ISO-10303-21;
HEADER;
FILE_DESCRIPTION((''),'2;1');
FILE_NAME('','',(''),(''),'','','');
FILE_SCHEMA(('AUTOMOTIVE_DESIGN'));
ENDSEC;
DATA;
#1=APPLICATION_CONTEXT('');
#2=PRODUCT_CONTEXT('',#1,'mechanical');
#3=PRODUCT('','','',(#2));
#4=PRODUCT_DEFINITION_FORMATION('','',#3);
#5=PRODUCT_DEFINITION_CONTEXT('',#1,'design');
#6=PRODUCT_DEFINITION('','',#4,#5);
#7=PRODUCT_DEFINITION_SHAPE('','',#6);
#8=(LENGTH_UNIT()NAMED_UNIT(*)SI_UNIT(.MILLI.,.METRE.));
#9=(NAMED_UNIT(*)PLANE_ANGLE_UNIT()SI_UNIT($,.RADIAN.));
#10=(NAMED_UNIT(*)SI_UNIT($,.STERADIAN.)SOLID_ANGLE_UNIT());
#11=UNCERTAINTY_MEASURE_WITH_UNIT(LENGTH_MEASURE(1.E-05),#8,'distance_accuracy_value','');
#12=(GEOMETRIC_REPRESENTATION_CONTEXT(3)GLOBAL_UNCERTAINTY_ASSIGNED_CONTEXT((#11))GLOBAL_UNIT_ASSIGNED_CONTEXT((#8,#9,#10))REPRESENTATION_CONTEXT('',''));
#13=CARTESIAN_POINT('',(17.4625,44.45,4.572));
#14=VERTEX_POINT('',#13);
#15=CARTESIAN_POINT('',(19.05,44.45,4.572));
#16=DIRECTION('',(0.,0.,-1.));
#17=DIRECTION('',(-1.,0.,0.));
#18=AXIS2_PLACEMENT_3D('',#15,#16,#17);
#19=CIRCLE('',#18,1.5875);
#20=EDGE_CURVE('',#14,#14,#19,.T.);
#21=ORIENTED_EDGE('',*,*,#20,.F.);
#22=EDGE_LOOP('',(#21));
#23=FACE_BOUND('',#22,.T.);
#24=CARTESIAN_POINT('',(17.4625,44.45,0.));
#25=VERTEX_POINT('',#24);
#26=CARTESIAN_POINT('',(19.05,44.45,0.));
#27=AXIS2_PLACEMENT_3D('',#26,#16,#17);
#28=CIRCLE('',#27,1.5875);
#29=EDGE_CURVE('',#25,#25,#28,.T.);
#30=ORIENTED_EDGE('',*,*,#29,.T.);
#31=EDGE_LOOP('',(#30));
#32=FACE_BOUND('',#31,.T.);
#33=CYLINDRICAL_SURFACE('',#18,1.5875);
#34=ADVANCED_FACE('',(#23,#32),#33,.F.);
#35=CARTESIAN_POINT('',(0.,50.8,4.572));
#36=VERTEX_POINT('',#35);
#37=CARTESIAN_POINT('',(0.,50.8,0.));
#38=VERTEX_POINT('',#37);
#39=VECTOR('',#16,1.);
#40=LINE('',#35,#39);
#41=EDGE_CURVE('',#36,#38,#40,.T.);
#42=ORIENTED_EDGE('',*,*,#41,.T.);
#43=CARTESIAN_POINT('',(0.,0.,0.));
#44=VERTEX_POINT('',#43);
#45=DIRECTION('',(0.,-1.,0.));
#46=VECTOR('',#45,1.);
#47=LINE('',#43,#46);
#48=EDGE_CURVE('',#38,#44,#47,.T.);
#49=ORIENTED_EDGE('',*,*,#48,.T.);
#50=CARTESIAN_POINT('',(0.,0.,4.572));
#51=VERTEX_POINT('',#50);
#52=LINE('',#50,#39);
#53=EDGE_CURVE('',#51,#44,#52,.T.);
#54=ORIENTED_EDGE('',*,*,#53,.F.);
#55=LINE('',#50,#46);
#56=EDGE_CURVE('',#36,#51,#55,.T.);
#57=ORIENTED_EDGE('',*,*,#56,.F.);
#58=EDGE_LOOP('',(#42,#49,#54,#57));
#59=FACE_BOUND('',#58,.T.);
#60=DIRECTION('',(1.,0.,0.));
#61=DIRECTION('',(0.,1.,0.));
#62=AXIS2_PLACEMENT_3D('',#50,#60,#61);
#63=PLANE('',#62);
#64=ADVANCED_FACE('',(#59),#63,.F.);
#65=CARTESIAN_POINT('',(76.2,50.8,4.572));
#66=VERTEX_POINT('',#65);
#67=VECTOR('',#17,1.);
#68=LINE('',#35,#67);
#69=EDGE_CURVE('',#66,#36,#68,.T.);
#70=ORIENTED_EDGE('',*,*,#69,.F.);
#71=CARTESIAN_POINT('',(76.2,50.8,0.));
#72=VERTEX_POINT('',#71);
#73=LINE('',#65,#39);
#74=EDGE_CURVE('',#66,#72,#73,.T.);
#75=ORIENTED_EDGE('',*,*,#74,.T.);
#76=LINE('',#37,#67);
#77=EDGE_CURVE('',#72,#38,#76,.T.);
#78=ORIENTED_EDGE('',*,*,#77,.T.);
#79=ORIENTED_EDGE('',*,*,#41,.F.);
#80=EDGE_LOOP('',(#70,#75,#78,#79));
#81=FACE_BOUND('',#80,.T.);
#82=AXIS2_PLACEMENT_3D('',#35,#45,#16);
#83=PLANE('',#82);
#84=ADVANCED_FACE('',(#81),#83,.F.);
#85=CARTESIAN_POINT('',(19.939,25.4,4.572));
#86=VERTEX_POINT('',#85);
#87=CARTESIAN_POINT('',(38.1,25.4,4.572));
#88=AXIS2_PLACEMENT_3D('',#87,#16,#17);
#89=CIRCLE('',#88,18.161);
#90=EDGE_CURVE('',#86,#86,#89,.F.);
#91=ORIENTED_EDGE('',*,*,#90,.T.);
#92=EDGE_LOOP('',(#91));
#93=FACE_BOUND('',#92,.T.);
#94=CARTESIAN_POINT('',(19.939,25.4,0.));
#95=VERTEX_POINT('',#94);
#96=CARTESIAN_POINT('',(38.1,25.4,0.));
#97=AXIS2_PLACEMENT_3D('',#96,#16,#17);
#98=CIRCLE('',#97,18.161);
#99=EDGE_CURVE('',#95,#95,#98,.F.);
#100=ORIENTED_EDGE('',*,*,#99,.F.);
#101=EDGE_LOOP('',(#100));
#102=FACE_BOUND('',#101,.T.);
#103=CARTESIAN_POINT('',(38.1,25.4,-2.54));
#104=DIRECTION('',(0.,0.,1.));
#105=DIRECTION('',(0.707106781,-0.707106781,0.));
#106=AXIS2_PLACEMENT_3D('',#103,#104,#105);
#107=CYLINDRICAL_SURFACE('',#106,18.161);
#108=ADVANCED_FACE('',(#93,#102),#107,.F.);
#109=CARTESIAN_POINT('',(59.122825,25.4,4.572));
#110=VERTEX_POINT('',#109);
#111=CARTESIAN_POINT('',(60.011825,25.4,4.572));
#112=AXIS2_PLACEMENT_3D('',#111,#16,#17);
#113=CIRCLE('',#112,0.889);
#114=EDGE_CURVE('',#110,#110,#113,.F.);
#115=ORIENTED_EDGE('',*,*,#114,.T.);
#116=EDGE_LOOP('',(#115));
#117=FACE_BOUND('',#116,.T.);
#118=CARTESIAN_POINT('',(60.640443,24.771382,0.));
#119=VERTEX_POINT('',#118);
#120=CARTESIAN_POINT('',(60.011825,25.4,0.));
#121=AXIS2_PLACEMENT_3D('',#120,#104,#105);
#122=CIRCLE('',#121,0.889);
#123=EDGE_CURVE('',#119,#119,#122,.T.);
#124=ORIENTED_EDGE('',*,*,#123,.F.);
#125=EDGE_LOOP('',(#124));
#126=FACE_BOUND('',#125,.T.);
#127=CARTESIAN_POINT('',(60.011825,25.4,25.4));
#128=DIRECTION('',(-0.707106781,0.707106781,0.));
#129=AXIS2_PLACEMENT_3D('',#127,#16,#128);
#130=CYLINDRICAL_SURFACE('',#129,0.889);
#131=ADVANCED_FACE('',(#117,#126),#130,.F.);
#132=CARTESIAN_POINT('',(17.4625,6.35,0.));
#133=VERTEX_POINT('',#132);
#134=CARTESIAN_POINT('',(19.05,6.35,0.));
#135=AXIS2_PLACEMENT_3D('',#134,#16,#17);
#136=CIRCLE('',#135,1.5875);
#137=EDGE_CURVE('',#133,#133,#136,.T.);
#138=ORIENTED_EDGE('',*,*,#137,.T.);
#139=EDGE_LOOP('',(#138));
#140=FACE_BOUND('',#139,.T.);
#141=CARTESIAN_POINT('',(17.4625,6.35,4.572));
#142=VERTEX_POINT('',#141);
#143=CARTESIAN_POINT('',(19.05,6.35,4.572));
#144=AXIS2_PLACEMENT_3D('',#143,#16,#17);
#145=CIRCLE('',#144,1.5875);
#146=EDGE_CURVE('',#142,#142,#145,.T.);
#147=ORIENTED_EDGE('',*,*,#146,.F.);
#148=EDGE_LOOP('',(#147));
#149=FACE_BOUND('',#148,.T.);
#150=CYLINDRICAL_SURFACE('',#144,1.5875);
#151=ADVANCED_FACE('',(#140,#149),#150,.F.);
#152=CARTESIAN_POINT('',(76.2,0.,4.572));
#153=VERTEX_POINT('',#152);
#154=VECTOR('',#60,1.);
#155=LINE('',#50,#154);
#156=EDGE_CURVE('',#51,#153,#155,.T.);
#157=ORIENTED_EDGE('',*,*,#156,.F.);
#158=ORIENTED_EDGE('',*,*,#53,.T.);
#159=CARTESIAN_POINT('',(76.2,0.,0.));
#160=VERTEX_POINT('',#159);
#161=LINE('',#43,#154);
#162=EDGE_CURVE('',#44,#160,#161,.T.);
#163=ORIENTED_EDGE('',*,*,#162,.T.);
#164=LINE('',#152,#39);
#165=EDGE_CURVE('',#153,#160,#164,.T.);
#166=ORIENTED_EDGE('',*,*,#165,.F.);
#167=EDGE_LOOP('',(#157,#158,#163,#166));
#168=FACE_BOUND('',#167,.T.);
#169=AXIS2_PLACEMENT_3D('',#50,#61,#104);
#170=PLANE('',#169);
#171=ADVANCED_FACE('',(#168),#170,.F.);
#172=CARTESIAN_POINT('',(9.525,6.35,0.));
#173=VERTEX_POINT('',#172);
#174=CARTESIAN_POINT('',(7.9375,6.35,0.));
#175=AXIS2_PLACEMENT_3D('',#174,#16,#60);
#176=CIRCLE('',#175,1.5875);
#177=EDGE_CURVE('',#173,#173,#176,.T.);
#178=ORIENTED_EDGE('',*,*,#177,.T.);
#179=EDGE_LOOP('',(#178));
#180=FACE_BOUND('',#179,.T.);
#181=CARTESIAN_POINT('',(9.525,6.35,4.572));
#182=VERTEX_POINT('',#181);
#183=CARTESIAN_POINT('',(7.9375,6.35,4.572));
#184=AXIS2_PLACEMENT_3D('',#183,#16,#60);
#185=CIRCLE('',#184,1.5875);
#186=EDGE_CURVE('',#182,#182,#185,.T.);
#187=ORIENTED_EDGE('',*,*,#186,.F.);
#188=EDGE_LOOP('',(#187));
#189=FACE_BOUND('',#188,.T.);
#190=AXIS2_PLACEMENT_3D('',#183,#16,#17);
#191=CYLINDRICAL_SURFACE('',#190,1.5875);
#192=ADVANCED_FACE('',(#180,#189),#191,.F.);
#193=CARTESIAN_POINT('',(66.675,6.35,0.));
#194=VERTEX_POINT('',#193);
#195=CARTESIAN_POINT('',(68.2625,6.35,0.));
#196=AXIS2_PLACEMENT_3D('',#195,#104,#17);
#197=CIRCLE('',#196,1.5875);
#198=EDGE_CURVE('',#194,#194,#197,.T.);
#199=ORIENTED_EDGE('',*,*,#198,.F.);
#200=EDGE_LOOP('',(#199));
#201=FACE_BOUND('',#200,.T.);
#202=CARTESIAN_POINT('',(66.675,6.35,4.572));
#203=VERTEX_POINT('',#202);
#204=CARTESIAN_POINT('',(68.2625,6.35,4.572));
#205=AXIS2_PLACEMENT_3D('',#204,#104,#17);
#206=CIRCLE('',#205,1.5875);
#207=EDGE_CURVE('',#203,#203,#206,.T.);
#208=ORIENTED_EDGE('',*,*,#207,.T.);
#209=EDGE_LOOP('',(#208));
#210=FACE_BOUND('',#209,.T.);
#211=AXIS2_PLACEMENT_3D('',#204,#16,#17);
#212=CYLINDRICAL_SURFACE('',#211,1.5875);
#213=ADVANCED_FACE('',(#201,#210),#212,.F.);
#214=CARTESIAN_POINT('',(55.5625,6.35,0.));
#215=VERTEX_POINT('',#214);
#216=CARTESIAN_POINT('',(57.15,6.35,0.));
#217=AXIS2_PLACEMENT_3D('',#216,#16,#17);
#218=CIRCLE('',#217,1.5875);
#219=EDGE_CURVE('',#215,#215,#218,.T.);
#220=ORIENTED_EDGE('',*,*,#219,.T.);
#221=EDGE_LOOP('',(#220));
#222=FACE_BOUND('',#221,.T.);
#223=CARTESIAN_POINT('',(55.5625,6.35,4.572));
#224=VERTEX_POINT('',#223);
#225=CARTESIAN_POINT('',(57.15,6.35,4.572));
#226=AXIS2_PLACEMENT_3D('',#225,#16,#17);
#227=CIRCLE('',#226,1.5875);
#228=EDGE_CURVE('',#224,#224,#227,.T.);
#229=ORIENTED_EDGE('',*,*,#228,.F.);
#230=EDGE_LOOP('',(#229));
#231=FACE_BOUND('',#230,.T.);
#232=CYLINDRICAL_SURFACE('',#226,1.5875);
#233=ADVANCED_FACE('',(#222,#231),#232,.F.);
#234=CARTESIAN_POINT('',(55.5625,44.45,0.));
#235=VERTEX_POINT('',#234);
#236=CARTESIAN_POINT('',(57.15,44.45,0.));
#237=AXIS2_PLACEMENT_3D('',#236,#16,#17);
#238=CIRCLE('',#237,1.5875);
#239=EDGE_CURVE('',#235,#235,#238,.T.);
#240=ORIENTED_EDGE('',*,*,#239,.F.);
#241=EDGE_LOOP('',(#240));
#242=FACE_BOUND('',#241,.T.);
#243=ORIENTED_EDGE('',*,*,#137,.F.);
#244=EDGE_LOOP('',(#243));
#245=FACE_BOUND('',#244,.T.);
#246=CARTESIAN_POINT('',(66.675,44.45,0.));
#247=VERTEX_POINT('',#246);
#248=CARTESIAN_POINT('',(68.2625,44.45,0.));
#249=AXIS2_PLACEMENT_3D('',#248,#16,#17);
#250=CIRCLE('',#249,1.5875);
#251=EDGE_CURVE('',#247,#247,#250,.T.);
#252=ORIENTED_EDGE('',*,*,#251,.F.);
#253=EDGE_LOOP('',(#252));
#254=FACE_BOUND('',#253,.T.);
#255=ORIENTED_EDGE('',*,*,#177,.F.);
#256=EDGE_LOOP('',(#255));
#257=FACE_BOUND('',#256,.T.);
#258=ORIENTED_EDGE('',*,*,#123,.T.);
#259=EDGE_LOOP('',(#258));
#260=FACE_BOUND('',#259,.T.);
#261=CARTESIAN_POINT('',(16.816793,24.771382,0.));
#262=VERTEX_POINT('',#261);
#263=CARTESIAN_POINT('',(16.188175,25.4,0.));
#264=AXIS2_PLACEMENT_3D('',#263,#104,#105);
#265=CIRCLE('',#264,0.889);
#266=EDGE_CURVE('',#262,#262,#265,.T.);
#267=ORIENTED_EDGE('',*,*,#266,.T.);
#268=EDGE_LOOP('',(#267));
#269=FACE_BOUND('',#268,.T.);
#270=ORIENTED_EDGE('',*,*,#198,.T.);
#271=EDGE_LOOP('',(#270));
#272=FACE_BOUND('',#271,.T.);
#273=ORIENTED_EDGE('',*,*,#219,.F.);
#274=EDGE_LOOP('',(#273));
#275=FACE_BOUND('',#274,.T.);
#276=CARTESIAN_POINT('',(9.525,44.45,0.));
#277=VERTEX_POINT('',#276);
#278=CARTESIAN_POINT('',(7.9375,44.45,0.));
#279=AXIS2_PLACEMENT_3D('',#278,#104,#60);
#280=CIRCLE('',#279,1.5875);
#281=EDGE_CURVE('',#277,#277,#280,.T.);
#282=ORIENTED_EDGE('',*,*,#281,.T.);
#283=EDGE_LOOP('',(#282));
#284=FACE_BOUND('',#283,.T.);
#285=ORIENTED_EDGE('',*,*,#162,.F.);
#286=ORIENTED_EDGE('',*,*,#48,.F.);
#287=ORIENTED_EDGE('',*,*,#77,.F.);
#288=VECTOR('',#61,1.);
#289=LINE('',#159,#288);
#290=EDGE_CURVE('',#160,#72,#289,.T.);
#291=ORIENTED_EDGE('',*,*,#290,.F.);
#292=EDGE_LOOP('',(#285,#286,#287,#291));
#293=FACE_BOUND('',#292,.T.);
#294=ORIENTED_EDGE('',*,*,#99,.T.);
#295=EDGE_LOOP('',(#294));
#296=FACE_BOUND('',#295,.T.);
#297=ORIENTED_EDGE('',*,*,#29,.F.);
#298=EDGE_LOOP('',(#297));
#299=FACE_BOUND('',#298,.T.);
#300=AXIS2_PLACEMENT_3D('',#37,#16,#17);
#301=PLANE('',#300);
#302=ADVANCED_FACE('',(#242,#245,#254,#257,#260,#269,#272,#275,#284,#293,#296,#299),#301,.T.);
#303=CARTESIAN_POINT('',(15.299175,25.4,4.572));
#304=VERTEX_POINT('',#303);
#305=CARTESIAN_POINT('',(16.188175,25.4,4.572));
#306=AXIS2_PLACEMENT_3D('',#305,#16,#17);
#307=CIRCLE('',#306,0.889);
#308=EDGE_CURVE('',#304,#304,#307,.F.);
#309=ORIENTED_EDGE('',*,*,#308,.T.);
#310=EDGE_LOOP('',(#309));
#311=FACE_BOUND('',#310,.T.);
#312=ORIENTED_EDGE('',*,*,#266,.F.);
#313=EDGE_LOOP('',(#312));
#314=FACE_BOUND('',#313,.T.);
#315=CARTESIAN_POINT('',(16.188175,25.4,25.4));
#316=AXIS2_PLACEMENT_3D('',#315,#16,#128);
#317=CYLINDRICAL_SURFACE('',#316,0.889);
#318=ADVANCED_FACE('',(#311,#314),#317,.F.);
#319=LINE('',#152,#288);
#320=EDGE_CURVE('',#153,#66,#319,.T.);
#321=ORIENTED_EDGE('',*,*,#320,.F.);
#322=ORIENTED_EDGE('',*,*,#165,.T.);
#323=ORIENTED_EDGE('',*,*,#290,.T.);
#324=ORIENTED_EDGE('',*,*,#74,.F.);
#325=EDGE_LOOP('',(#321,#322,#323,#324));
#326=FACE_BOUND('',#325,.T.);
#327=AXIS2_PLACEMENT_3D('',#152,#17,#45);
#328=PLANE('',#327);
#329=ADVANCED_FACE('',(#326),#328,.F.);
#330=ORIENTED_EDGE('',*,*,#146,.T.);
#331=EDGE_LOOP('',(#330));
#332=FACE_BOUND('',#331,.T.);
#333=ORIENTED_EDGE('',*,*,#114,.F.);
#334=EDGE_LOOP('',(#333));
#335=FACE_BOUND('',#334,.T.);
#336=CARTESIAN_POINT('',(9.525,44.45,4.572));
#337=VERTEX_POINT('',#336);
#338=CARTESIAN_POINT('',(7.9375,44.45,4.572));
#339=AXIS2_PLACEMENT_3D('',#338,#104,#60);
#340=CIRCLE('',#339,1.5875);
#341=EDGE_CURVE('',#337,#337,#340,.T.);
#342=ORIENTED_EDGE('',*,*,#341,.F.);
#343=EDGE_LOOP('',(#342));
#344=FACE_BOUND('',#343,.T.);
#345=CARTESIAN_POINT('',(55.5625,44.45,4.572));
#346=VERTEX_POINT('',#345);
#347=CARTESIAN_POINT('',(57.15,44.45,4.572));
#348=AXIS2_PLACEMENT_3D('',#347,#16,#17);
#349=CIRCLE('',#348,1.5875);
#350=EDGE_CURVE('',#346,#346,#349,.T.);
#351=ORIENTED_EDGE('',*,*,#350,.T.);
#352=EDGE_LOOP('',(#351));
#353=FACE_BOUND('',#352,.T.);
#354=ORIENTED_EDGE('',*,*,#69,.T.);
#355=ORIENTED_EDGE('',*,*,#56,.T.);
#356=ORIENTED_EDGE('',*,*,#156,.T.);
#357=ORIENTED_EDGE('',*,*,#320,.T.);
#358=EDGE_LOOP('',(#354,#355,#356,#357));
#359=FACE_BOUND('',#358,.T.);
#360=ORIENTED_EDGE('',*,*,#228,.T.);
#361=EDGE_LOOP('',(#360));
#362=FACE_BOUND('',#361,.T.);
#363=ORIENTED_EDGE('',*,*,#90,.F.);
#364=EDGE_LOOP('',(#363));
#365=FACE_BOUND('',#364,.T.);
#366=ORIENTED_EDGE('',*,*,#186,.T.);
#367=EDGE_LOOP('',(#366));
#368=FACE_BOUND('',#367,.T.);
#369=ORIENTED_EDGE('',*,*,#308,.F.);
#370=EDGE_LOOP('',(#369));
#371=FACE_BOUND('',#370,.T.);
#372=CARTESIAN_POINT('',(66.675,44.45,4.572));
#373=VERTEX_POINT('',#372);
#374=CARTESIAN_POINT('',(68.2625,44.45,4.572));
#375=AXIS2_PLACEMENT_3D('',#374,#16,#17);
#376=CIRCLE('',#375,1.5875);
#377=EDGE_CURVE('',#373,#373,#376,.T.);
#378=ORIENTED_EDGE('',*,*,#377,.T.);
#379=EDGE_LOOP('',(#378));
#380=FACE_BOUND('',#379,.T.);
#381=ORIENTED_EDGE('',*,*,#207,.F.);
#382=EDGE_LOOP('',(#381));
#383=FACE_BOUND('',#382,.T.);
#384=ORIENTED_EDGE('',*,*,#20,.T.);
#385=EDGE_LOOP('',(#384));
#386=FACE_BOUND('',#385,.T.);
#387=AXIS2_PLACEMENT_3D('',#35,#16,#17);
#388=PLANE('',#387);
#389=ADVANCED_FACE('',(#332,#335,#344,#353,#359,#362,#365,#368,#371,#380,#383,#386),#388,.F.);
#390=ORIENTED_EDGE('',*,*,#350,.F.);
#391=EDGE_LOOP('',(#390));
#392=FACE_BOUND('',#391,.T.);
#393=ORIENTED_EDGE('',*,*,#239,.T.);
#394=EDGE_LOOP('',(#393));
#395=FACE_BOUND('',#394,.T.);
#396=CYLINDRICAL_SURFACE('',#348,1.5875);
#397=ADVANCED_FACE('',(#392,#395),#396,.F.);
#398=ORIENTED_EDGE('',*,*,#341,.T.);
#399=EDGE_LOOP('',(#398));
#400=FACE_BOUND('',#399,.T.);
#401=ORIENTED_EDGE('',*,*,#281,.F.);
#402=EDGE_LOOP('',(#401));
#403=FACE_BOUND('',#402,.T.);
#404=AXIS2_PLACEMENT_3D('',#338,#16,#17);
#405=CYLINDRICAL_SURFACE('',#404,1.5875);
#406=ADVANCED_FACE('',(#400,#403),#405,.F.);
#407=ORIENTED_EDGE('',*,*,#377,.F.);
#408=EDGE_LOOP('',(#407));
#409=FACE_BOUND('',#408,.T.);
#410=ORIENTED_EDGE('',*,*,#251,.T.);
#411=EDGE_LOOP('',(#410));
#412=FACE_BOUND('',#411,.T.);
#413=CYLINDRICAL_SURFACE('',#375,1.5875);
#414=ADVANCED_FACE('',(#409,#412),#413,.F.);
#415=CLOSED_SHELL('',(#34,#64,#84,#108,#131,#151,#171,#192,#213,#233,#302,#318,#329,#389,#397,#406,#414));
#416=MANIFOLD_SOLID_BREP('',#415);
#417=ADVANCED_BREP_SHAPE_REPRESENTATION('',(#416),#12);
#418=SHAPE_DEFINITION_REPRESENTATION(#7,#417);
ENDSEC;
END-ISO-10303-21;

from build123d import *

# Parameters (mm, degrees)
SKETCH1_W               = 76.2
SKETCH1_H               = 50.8
BOSS_EXTRUDE1_DEPTH     = 4.572
CAVITY5_OUTLINE_R       = 18.161
CAVITY5_OUTLINE_R_2     = 0.889
CAVITY5_DEPTH           = 4.572
SKETCH3_R               = 1.5875
CUT_EXTRUDE1_DEPTH      = 92.695055396
MIRROR2_COPY_1_SKETCH_R = 1.5875
MIRROR2_COPY_1_DEPTH    = 92.695055396
SKETCH4_R               = 1.5875
CUT_EXTRUDE2_DEPTH      = 92.695055396


# Read off the part's stored shape, not the designer's step: Cavity5
with BuildPart() as part:
    # Sketch1 → Boss-Extrude1 (new body)
    with BuildSketch(Plane.XY):
        with Locations((38.1, 25.4)):
            Rectangle(SKETCH1_W, SKETCH1_H)
    extrude(amount=BOSS_EXTRUDE1_DEPTH)

    # Cavity5 outline → Cavity5 (cut)
    with BuildSketch(Plane.XY):
        with Locations((38.1, 25.4)):
            Circle(CAVITY5_OUTLINE_R)
        with Locations((16.188175065, 25.4)):
            Circle(CAVITY5_OUTLINE_R_2)
        with Locations((60.011824935, 25.4)):
            Circle(CAVITY5_OUTLINE_R_2)
    extrude(amount=CAVITY5_DEPTH, mode=Mode.SUBTRACT)

    # Sketch3 → Cut-Extrude1 (cut, through all)
    with BuildSketch(Plane(origin=(0, 0, 0), x_dir=(-1, 0, 0), z_dir=(0, 0, -1))):
        with Locations((-68.2625, 44.45)):
            Circle(SKETCH3_R)
    cut_extrude1 = extrude(amount=-CUT_EXTRUDE1_DEPTH, mode=Mode.SUBTRACT)

    # Mirror1: Cut-Extrude1 across plane
    add(cut_extrude1.mirror(Plane(origin=(38.1, 0, 0), x_dir=(0, 0, 1), z_dir=(1, 0, 0))), mode=Mode.SUBTRACT)

    # Mirror2: Cut-Extrude1 across plane
    add(cut_extrude1.mirror(Plane.ZX.offset(25.4)), mode=Mode.SUBTRACT)

    # Mirror2 copy 1 sketch → Mirror2 copy 1 (cut, through all)
    with BuildSketch(Plane(origin=(76.2, 50.8, 0), x_dir=(1, 0, 0), z_dir=(0, 0, -1))):
        with Locations((-68.2625, 44.45)):
            Circle(MIRROR2_COPY_1_SKETCH_R)
    extrude(amount=-MIRROR2_COPY_1_DEPTH, mode=Mode.SUBTRACT)

    # Sketch4 → Cut-Extrude2 (cut, through all)
    with BuildSketch(Plane(origin=(0, 0, 0), x_dir=(-1, 0, 0), z_dir=(0, 0, -1))):
        with Locations((-19.05, 44.45)):
            Circle(SKETCH4_R)
        with Locations((-57.15, 44.45)):
            Circle(SKETCH4_R)
        with Locations((-57.15, 6.35)):
            Circle(SKETCH4_R)
        with Locations((-19.05, 6.35)):
            Circle(SKETCH4_R)
    extrude(amount=-CUT_EXTRUDE2_DEPTH, mode=Mode.SUBTRACT)


solid = part.part
